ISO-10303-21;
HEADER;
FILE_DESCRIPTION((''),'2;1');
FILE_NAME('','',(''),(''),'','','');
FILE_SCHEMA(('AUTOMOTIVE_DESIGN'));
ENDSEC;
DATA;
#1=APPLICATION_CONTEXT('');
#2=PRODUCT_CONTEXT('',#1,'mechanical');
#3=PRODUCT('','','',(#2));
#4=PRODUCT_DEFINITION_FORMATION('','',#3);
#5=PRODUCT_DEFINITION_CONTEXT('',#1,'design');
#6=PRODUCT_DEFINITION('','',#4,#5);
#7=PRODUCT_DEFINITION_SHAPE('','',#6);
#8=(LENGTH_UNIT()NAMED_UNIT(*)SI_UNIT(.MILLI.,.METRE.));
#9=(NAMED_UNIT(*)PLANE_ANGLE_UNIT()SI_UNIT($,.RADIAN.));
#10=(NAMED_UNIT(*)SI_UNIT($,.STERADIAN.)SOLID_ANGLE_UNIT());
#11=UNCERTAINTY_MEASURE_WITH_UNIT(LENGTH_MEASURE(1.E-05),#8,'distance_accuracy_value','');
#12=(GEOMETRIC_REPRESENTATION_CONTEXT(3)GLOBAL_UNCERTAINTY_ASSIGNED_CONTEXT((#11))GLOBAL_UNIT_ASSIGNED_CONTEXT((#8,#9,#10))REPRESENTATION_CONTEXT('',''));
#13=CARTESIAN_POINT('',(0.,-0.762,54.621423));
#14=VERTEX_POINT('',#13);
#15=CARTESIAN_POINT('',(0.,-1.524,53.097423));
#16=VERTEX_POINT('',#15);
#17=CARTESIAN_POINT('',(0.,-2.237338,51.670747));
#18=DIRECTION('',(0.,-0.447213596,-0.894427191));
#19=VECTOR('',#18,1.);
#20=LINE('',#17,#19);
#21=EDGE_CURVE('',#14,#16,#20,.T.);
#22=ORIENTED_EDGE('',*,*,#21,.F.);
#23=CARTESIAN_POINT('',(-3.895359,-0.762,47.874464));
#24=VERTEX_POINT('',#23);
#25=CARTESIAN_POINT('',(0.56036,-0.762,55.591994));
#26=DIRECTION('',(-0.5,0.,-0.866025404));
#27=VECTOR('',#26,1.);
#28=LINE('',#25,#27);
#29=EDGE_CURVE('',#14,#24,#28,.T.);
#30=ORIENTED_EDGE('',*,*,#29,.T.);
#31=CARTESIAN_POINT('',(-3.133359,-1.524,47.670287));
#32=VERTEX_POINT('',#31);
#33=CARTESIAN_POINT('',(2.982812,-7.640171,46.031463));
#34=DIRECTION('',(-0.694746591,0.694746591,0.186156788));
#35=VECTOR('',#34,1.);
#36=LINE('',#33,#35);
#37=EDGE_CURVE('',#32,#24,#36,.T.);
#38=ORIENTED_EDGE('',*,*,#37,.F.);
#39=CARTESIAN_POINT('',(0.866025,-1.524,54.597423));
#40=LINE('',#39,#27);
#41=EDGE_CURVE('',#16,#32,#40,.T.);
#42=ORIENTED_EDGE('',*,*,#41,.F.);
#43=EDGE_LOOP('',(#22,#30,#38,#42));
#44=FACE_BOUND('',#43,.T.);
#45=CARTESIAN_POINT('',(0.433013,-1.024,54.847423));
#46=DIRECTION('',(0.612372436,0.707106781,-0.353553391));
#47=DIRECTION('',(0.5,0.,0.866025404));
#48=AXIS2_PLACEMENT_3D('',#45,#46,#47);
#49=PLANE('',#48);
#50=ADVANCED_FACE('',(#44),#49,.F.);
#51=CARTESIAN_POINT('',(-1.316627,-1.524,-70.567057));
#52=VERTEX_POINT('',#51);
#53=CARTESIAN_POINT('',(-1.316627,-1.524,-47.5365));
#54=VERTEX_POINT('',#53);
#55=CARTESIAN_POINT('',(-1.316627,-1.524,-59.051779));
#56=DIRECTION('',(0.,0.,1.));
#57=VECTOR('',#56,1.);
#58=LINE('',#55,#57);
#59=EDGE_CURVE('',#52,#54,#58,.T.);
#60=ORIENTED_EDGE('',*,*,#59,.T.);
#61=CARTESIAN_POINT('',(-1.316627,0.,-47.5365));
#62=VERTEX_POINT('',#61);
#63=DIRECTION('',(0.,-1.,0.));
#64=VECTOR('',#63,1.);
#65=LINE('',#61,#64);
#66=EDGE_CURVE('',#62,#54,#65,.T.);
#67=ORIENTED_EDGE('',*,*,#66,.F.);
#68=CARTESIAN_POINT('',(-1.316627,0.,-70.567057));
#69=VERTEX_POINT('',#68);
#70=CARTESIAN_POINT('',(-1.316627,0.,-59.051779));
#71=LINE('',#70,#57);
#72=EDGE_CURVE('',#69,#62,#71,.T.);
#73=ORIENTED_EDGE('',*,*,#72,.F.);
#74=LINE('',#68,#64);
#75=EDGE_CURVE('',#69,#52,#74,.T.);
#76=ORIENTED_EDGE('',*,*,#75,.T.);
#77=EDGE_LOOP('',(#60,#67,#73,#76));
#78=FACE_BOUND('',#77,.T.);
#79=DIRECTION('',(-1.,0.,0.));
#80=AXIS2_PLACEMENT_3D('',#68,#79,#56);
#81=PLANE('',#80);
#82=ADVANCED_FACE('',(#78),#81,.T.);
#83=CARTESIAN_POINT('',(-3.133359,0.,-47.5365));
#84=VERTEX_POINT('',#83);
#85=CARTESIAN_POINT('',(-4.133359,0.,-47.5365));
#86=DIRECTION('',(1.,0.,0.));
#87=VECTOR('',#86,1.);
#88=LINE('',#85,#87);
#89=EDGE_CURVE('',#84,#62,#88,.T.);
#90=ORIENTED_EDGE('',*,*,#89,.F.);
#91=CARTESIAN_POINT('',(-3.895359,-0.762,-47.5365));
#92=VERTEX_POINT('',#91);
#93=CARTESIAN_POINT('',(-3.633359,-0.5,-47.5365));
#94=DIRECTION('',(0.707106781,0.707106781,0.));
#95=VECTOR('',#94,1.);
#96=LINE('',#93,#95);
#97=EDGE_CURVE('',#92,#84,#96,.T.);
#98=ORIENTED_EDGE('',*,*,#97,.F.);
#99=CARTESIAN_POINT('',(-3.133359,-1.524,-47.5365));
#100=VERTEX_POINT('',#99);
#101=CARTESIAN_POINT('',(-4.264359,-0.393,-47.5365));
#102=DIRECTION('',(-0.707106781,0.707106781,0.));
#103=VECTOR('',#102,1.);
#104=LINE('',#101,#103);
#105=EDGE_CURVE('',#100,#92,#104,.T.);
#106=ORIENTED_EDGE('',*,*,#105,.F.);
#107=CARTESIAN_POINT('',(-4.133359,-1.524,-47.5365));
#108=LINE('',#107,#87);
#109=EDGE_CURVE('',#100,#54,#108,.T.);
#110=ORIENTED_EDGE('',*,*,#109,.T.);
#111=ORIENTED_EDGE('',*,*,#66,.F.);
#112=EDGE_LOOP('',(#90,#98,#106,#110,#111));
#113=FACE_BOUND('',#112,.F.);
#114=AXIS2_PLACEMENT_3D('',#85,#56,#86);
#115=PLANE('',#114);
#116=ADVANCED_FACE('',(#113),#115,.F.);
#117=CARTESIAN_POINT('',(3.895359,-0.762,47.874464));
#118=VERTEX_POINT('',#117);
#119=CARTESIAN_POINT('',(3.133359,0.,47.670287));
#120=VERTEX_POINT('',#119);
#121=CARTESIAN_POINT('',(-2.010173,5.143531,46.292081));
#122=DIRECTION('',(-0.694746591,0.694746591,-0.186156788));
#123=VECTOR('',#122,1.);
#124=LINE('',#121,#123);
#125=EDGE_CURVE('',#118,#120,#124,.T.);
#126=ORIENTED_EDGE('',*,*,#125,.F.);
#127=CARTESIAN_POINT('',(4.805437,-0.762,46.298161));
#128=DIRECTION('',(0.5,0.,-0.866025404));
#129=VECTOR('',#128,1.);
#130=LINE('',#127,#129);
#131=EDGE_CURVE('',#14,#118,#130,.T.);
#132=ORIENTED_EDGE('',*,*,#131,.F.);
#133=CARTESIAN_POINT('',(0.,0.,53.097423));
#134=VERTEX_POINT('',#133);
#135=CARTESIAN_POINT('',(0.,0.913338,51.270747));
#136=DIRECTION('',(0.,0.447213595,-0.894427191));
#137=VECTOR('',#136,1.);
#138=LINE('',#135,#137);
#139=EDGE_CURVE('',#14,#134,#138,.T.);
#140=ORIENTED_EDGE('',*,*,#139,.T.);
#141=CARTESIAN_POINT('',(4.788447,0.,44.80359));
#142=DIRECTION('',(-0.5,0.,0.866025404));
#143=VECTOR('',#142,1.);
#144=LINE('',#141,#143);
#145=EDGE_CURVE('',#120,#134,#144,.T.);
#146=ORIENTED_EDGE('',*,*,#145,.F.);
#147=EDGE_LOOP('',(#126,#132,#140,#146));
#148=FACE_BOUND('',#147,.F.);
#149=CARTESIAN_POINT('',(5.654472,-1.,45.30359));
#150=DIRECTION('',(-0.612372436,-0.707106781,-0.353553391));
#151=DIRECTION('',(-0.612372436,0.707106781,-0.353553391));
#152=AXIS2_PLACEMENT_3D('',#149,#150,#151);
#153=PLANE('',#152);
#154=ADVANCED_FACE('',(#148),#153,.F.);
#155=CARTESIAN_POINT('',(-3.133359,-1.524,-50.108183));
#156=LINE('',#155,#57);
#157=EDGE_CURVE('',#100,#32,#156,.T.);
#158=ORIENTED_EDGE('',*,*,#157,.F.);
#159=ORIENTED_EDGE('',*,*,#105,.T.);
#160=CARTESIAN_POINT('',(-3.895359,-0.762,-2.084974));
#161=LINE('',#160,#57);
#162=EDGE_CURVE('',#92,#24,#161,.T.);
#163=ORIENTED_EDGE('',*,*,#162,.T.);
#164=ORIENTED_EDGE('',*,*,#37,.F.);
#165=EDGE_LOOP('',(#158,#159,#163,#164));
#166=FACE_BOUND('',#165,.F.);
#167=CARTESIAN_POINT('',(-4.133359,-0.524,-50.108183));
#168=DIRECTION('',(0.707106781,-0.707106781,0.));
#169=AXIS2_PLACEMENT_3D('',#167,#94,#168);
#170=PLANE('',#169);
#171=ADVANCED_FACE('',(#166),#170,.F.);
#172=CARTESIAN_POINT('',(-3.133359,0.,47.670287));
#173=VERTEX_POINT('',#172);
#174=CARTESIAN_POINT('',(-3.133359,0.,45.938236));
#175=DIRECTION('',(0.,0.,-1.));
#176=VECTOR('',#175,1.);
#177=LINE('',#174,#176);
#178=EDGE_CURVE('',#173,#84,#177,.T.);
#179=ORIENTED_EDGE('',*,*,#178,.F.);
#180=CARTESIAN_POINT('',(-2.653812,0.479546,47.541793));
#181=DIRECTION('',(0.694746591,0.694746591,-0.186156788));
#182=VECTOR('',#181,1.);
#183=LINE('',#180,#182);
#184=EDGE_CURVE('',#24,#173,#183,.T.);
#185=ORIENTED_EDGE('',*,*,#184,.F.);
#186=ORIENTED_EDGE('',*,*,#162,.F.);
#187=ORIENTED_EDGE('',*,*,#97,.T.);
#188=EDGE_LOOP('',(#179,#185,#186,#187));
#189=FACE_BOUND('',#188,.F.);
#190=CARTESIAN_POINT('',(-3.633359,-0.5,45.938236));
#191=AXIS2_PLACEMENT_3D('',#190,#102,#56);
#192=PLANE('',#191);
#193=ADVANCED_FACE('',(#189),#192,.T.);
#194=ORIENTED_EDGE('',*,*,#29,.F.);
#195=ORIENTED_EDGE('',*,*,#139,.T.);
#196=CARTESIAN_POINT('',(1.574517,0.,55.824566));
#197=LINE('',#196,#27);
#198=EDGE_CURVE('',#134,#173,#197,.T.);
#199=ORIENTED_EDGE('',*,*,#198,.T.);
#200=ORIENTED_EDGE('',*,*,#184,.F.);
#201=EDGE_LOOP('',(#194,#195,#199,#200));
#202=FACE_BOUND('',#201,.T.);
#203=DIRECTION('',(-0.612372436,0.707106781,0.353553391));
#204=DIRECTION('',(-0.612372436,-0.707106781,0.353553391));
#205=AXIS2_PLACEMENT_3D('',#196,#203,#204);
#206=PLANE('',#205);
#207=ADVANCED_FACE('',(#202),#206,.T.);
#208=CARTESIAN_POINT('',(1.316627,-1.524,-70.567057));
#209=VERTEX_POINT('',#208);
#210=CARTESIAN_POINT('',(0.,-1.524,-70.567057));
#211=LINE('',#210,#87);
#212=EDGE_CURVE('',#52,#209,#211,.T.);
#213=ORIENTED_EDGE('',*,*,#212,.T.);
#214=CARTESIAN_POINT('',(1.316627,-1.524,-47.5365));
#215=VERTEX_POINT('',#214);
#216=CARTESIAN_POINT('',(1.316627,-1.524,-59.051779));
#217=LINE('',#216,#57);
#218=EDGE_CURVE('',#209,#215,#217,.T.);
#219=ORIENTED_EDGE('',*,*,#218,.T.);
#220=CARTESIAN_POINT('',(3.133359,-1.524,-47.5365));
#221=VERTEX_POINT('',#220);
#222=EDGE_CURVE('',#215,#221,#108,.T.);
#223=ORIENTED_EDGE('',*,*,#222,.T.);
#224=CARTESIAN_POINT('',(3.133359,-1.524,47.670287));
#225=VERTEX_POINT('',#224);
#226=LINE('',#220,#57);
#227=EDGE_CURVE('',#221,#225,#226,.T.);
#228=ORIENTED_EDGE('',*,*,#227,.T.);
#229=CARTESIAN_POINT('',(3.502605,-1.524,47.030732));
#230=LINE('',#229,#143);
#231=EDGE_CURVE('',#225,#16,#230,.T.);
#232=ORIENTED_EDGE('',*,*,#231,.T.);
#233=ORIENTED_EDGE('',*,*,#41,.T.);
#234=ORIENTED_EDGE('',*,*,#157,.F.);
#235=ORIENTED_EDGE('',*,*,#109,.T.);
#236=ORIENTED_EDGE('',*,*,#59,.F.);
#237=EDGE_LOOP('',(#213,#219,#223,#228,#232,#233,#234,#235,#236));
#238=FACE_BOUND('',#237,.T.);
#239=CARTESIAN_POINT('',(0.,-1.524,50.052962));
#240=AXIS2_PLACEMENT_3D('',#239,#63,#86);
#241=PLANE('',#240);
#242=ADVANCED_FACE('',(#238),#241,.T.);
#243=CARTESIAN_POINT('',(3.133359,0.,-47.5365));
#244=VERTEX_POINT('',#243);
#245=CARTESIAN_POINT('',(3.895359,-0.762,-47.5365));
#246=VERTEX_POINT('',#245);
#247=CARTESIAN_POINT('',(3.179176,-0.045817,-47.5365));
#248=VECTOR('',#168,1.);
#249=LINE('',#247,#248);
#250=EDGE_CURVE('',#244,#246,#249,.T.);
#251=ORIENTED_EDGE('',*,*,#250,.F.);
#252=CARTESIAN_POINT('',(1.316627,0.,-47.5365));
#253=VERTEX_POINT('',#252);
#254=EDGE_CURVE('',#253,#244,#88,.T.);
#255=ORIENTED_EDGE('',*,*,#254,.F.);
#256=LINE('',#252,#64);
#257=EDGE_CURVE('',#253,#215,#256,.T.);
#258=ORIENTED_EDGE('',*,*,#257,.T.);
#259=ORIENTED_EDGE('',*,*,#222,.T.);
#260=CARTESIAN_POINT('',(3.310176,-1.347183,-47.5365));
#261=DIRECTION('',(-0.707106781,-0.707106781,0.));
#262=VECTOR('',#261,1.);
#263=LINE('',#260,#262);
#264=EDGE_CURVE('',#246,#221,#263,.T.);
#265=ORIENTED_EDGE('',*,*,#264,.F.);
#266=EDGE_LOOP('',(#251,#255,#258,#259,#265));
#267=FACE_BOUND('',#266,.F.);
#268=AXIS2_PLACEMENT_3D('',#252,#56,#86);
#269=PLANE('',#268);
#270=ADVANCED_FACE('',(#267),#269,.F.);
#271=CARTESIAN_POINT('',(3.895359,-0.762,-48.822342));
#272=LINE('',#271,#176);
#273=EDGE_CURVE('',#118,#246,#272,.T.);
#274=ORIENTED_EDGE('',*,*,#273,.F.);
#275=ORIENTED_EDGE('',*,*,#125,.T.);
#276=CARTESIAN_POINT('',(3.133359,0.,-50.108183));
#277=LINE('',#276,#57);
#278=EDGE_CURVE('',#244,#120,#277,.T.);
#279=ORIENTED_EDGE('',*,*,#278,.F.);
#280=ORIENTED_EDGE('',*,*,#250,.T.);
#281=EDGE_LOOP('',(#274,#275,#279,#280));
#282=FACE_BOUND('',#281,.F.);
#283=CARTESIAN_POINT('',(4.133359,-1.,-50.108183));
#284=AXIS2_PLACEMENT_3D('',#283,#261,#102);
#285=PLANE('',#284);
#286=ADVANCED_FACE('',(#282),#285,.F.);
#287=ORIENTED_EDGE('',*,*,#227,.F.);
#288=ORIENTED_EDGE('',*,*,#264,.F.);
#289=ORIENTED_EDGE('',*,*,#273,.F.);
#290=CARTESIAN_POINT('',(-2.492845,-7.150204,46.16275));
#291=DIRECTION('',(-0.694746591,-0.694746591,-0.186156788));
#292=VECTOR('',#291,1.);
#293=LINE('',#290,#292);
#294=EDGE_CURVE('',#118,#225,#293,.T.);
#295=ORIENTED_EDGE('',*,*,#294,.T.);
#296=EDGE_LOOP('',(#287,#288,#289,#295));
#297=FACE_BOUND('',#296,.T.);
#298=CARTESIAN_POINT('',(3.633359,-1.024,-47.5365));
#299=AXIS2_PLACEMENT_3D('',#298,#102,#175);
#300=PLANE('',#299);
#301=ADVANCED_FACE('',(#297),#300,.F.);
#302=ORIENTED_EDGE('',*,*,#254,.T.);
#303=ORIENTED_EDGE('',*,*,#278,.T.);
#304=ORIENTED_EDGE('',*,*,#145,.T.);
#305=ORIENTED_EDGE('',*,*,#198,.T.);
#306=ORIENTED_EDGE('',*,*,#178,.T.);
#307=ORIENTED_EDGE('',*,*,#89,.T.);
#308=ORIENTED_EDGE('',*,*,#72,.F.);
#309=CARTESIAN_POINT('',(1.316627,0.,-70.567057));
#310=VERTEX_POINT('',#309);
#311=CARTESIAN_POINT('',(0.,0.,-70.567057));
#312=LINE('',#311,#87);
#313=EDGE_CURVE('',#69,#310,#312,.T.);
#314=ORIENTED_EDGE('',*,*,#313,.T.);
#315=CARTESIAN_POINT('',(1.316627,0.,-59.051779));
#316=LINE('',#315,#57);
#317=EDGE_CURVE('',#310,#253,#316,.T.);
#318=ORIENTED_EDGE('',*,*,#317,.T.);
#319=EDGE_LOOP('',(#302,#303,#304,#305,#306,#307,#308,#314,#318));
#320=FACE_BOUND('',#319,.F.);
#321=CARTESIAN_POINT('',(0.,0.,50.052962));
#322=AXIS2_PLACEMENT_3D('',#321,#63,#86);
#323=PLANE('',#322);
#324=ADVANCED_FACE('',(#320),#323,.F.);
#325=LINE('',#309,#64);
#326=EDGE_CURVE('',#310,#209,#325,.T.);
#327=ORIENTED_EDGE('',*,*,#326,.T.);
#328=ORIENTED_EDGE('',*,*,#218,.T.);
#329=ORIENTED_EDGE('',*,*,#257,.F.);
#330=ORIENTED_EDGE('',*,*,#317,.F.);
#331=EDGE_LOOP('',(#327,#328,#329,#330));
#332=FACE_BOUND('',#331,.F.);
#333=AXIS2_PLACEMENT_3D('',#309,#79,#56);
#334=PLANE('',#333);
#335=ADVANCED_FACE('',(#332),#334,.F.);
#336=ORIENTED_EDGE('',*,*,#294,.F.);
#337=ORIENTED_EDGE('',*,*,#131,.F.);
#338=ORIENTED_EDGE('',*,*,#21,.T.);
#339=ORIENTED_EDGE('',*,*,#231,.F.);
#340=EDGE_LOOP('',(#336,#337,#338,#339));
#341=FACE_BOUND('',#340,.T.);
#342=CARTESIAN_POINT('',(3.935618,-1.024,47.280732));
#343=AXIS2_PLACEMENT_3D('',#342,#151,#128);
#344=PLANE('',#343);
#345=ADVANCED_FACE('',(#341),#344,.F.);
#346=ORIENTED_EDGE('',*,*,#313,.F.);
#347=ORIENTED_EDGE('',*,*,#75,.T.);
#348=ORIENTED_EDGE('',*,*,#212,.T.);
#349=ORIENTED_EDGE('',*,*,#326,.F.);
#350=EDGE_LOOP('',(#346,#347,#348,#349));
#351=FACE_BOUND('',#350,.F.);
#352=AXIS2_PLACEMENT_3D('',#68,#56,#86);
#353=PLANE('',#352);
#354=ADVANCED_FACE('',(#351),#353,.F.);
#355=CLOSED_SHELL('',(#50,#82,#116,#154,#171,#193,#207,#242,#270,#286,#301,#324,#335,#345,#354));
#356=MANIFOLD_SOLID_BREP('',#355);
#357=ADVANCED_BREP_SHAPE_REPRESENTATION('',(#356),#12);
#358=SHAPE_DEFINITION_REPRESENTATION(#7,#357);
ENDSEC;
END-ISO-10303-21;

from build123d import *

# Parameters (mm, degrees)
F0_W        = 2.6332533453
F0_H        = 23.0305567384
F1_DEPTH    = 1.524
F2_SIZE     = 1
F3_SIZE     = 1
F4_T1_DEPTH = 13.8806275065
F5_T1_DEPTH = 12.7259269681
F6_SIZE     = 1
F7_T1_DEPTH = 98.6181021709
F8_SIZE     = 1
F9_T1_DEPTH = 98.6181021709


# Not quite as in the source:
# - a fillet or chamfer that OpenCascade refuses, or shapes differently, is made with other operations: its cross-section is extruded or revolved along the edge and cut away or added


with BuildPart() as f1:
    # F0 (on Front) → F1 (new body)
    with BuildSketch(Plane.XZ):
        Polygon((-4.1333585978, 47.5307323504), (4.1333585978, 47.5307323504), (4.3686307653, 47.5307323504), (0, 55.0974227954), (-4.3686307653, 47.5307323504), align=None)
        Polygon((4.1333585978, -47.5365004968), (4.1333585978, 47.5307323504), (-4.1333585978, 47.5307323504), (-4.1333585978, -47.5365004968), (-1.3166266726, -47.5365004968), (1.3166266726, -47.5365004968), align=None)
        with Locations((0, -59.051778866)):
            Rectangle(F0_W, F0_H)
    extrude(amount=F1_DEPTH)

    # F2
    f2_edges = [f1.edges().sort_by_distance(p)[0] for p in [
        (-2.184315, -1.524, 51.314078),
    ]]
    chamfer(f2_edges, length=F2_SIZE)

    # F3
    f3_edges = [f1.edges().sort_by_distance(p)[0] for p in [
        (2.472991, -1.524, 50.814078),
    ]]
    chamfer(f3_edges, length=F3_SIZE)

    # F4: chamfer of 1 on 1 edges, made by hand

    # F4_s2 → F4_t1 (cut)
    with BuildSketch(Plane(origin=(-18.2034116527, 0, 31.5292338535), x_dir=(0, 1, 0), z_dir=(-0.5, 0, 0.8660254038))):
        Polygon((-1, -27.5487113977), (0, -26.5487113977), (0, -27.5487113977), align=None)
    extrude(amount=F4_T1_DEPTH, mode=Mode.SUBTRACT)

    # F5: chamfer of 1 on 1 edges, made by hand

    # F5_s2 → F5_t1 (cut)
    with BuildSketch(Plane(origin=(24.5663751367, 0, 42.5502098946), x_dir=(0, 1, 0), z_dir=(-0.5, 0, -0.8660254038))):
        Polygon((0, -26.5487113977), (-1, -27.5487113977), (0, -27.5487113977), align=None)
    extrude(amount=F5_T1_DEPTH, mode=Mode.SUBTRACT)

    # F6
    f6_edges = [f1.edges().sort_by_distance(p)[0] for p in [
        (4.133359, -1.524, -0.799132),
    ]]
    chamfer(f6_edges, length=F6_SIZE)

    # F7: chamfer of 1 on 1 edges, made by hand

    # F7_s2 → F7_t1 (cut)
    with BuildSketch(Plane.XY.offset(-50.1081834848)):
        Polygon((4.1333585978, -1), (3.1333585978, 0), (4.1333585978, 0), align=None)
    extrude(amount=F7_T1_DEPTH, mode=Mode.SUBTRACT)

    # F8
    f8_edges = [f1.edges().sort_by_distance(p)[0] for p in [
        (-4.133359, 0, -0.799132),
    ]]
    chamfer(f8_edges, length=F8_SIZE)

    # F9: chamfer of 1 on 1 edges, made by hand

    # F9_s2 → F9_t1 (cut)
    with BuildSketch(Plane.XY.offset(-50.1081834848)):
        Polygon((-4.1333585978, -0.524), (-3.1333585978, -1.524), (-4.1333585978, -1.524), align=None)
    extrude(amount=F9_T1_DEPTH, mode=Mode.SUBTRACT)


solid = f1.part
